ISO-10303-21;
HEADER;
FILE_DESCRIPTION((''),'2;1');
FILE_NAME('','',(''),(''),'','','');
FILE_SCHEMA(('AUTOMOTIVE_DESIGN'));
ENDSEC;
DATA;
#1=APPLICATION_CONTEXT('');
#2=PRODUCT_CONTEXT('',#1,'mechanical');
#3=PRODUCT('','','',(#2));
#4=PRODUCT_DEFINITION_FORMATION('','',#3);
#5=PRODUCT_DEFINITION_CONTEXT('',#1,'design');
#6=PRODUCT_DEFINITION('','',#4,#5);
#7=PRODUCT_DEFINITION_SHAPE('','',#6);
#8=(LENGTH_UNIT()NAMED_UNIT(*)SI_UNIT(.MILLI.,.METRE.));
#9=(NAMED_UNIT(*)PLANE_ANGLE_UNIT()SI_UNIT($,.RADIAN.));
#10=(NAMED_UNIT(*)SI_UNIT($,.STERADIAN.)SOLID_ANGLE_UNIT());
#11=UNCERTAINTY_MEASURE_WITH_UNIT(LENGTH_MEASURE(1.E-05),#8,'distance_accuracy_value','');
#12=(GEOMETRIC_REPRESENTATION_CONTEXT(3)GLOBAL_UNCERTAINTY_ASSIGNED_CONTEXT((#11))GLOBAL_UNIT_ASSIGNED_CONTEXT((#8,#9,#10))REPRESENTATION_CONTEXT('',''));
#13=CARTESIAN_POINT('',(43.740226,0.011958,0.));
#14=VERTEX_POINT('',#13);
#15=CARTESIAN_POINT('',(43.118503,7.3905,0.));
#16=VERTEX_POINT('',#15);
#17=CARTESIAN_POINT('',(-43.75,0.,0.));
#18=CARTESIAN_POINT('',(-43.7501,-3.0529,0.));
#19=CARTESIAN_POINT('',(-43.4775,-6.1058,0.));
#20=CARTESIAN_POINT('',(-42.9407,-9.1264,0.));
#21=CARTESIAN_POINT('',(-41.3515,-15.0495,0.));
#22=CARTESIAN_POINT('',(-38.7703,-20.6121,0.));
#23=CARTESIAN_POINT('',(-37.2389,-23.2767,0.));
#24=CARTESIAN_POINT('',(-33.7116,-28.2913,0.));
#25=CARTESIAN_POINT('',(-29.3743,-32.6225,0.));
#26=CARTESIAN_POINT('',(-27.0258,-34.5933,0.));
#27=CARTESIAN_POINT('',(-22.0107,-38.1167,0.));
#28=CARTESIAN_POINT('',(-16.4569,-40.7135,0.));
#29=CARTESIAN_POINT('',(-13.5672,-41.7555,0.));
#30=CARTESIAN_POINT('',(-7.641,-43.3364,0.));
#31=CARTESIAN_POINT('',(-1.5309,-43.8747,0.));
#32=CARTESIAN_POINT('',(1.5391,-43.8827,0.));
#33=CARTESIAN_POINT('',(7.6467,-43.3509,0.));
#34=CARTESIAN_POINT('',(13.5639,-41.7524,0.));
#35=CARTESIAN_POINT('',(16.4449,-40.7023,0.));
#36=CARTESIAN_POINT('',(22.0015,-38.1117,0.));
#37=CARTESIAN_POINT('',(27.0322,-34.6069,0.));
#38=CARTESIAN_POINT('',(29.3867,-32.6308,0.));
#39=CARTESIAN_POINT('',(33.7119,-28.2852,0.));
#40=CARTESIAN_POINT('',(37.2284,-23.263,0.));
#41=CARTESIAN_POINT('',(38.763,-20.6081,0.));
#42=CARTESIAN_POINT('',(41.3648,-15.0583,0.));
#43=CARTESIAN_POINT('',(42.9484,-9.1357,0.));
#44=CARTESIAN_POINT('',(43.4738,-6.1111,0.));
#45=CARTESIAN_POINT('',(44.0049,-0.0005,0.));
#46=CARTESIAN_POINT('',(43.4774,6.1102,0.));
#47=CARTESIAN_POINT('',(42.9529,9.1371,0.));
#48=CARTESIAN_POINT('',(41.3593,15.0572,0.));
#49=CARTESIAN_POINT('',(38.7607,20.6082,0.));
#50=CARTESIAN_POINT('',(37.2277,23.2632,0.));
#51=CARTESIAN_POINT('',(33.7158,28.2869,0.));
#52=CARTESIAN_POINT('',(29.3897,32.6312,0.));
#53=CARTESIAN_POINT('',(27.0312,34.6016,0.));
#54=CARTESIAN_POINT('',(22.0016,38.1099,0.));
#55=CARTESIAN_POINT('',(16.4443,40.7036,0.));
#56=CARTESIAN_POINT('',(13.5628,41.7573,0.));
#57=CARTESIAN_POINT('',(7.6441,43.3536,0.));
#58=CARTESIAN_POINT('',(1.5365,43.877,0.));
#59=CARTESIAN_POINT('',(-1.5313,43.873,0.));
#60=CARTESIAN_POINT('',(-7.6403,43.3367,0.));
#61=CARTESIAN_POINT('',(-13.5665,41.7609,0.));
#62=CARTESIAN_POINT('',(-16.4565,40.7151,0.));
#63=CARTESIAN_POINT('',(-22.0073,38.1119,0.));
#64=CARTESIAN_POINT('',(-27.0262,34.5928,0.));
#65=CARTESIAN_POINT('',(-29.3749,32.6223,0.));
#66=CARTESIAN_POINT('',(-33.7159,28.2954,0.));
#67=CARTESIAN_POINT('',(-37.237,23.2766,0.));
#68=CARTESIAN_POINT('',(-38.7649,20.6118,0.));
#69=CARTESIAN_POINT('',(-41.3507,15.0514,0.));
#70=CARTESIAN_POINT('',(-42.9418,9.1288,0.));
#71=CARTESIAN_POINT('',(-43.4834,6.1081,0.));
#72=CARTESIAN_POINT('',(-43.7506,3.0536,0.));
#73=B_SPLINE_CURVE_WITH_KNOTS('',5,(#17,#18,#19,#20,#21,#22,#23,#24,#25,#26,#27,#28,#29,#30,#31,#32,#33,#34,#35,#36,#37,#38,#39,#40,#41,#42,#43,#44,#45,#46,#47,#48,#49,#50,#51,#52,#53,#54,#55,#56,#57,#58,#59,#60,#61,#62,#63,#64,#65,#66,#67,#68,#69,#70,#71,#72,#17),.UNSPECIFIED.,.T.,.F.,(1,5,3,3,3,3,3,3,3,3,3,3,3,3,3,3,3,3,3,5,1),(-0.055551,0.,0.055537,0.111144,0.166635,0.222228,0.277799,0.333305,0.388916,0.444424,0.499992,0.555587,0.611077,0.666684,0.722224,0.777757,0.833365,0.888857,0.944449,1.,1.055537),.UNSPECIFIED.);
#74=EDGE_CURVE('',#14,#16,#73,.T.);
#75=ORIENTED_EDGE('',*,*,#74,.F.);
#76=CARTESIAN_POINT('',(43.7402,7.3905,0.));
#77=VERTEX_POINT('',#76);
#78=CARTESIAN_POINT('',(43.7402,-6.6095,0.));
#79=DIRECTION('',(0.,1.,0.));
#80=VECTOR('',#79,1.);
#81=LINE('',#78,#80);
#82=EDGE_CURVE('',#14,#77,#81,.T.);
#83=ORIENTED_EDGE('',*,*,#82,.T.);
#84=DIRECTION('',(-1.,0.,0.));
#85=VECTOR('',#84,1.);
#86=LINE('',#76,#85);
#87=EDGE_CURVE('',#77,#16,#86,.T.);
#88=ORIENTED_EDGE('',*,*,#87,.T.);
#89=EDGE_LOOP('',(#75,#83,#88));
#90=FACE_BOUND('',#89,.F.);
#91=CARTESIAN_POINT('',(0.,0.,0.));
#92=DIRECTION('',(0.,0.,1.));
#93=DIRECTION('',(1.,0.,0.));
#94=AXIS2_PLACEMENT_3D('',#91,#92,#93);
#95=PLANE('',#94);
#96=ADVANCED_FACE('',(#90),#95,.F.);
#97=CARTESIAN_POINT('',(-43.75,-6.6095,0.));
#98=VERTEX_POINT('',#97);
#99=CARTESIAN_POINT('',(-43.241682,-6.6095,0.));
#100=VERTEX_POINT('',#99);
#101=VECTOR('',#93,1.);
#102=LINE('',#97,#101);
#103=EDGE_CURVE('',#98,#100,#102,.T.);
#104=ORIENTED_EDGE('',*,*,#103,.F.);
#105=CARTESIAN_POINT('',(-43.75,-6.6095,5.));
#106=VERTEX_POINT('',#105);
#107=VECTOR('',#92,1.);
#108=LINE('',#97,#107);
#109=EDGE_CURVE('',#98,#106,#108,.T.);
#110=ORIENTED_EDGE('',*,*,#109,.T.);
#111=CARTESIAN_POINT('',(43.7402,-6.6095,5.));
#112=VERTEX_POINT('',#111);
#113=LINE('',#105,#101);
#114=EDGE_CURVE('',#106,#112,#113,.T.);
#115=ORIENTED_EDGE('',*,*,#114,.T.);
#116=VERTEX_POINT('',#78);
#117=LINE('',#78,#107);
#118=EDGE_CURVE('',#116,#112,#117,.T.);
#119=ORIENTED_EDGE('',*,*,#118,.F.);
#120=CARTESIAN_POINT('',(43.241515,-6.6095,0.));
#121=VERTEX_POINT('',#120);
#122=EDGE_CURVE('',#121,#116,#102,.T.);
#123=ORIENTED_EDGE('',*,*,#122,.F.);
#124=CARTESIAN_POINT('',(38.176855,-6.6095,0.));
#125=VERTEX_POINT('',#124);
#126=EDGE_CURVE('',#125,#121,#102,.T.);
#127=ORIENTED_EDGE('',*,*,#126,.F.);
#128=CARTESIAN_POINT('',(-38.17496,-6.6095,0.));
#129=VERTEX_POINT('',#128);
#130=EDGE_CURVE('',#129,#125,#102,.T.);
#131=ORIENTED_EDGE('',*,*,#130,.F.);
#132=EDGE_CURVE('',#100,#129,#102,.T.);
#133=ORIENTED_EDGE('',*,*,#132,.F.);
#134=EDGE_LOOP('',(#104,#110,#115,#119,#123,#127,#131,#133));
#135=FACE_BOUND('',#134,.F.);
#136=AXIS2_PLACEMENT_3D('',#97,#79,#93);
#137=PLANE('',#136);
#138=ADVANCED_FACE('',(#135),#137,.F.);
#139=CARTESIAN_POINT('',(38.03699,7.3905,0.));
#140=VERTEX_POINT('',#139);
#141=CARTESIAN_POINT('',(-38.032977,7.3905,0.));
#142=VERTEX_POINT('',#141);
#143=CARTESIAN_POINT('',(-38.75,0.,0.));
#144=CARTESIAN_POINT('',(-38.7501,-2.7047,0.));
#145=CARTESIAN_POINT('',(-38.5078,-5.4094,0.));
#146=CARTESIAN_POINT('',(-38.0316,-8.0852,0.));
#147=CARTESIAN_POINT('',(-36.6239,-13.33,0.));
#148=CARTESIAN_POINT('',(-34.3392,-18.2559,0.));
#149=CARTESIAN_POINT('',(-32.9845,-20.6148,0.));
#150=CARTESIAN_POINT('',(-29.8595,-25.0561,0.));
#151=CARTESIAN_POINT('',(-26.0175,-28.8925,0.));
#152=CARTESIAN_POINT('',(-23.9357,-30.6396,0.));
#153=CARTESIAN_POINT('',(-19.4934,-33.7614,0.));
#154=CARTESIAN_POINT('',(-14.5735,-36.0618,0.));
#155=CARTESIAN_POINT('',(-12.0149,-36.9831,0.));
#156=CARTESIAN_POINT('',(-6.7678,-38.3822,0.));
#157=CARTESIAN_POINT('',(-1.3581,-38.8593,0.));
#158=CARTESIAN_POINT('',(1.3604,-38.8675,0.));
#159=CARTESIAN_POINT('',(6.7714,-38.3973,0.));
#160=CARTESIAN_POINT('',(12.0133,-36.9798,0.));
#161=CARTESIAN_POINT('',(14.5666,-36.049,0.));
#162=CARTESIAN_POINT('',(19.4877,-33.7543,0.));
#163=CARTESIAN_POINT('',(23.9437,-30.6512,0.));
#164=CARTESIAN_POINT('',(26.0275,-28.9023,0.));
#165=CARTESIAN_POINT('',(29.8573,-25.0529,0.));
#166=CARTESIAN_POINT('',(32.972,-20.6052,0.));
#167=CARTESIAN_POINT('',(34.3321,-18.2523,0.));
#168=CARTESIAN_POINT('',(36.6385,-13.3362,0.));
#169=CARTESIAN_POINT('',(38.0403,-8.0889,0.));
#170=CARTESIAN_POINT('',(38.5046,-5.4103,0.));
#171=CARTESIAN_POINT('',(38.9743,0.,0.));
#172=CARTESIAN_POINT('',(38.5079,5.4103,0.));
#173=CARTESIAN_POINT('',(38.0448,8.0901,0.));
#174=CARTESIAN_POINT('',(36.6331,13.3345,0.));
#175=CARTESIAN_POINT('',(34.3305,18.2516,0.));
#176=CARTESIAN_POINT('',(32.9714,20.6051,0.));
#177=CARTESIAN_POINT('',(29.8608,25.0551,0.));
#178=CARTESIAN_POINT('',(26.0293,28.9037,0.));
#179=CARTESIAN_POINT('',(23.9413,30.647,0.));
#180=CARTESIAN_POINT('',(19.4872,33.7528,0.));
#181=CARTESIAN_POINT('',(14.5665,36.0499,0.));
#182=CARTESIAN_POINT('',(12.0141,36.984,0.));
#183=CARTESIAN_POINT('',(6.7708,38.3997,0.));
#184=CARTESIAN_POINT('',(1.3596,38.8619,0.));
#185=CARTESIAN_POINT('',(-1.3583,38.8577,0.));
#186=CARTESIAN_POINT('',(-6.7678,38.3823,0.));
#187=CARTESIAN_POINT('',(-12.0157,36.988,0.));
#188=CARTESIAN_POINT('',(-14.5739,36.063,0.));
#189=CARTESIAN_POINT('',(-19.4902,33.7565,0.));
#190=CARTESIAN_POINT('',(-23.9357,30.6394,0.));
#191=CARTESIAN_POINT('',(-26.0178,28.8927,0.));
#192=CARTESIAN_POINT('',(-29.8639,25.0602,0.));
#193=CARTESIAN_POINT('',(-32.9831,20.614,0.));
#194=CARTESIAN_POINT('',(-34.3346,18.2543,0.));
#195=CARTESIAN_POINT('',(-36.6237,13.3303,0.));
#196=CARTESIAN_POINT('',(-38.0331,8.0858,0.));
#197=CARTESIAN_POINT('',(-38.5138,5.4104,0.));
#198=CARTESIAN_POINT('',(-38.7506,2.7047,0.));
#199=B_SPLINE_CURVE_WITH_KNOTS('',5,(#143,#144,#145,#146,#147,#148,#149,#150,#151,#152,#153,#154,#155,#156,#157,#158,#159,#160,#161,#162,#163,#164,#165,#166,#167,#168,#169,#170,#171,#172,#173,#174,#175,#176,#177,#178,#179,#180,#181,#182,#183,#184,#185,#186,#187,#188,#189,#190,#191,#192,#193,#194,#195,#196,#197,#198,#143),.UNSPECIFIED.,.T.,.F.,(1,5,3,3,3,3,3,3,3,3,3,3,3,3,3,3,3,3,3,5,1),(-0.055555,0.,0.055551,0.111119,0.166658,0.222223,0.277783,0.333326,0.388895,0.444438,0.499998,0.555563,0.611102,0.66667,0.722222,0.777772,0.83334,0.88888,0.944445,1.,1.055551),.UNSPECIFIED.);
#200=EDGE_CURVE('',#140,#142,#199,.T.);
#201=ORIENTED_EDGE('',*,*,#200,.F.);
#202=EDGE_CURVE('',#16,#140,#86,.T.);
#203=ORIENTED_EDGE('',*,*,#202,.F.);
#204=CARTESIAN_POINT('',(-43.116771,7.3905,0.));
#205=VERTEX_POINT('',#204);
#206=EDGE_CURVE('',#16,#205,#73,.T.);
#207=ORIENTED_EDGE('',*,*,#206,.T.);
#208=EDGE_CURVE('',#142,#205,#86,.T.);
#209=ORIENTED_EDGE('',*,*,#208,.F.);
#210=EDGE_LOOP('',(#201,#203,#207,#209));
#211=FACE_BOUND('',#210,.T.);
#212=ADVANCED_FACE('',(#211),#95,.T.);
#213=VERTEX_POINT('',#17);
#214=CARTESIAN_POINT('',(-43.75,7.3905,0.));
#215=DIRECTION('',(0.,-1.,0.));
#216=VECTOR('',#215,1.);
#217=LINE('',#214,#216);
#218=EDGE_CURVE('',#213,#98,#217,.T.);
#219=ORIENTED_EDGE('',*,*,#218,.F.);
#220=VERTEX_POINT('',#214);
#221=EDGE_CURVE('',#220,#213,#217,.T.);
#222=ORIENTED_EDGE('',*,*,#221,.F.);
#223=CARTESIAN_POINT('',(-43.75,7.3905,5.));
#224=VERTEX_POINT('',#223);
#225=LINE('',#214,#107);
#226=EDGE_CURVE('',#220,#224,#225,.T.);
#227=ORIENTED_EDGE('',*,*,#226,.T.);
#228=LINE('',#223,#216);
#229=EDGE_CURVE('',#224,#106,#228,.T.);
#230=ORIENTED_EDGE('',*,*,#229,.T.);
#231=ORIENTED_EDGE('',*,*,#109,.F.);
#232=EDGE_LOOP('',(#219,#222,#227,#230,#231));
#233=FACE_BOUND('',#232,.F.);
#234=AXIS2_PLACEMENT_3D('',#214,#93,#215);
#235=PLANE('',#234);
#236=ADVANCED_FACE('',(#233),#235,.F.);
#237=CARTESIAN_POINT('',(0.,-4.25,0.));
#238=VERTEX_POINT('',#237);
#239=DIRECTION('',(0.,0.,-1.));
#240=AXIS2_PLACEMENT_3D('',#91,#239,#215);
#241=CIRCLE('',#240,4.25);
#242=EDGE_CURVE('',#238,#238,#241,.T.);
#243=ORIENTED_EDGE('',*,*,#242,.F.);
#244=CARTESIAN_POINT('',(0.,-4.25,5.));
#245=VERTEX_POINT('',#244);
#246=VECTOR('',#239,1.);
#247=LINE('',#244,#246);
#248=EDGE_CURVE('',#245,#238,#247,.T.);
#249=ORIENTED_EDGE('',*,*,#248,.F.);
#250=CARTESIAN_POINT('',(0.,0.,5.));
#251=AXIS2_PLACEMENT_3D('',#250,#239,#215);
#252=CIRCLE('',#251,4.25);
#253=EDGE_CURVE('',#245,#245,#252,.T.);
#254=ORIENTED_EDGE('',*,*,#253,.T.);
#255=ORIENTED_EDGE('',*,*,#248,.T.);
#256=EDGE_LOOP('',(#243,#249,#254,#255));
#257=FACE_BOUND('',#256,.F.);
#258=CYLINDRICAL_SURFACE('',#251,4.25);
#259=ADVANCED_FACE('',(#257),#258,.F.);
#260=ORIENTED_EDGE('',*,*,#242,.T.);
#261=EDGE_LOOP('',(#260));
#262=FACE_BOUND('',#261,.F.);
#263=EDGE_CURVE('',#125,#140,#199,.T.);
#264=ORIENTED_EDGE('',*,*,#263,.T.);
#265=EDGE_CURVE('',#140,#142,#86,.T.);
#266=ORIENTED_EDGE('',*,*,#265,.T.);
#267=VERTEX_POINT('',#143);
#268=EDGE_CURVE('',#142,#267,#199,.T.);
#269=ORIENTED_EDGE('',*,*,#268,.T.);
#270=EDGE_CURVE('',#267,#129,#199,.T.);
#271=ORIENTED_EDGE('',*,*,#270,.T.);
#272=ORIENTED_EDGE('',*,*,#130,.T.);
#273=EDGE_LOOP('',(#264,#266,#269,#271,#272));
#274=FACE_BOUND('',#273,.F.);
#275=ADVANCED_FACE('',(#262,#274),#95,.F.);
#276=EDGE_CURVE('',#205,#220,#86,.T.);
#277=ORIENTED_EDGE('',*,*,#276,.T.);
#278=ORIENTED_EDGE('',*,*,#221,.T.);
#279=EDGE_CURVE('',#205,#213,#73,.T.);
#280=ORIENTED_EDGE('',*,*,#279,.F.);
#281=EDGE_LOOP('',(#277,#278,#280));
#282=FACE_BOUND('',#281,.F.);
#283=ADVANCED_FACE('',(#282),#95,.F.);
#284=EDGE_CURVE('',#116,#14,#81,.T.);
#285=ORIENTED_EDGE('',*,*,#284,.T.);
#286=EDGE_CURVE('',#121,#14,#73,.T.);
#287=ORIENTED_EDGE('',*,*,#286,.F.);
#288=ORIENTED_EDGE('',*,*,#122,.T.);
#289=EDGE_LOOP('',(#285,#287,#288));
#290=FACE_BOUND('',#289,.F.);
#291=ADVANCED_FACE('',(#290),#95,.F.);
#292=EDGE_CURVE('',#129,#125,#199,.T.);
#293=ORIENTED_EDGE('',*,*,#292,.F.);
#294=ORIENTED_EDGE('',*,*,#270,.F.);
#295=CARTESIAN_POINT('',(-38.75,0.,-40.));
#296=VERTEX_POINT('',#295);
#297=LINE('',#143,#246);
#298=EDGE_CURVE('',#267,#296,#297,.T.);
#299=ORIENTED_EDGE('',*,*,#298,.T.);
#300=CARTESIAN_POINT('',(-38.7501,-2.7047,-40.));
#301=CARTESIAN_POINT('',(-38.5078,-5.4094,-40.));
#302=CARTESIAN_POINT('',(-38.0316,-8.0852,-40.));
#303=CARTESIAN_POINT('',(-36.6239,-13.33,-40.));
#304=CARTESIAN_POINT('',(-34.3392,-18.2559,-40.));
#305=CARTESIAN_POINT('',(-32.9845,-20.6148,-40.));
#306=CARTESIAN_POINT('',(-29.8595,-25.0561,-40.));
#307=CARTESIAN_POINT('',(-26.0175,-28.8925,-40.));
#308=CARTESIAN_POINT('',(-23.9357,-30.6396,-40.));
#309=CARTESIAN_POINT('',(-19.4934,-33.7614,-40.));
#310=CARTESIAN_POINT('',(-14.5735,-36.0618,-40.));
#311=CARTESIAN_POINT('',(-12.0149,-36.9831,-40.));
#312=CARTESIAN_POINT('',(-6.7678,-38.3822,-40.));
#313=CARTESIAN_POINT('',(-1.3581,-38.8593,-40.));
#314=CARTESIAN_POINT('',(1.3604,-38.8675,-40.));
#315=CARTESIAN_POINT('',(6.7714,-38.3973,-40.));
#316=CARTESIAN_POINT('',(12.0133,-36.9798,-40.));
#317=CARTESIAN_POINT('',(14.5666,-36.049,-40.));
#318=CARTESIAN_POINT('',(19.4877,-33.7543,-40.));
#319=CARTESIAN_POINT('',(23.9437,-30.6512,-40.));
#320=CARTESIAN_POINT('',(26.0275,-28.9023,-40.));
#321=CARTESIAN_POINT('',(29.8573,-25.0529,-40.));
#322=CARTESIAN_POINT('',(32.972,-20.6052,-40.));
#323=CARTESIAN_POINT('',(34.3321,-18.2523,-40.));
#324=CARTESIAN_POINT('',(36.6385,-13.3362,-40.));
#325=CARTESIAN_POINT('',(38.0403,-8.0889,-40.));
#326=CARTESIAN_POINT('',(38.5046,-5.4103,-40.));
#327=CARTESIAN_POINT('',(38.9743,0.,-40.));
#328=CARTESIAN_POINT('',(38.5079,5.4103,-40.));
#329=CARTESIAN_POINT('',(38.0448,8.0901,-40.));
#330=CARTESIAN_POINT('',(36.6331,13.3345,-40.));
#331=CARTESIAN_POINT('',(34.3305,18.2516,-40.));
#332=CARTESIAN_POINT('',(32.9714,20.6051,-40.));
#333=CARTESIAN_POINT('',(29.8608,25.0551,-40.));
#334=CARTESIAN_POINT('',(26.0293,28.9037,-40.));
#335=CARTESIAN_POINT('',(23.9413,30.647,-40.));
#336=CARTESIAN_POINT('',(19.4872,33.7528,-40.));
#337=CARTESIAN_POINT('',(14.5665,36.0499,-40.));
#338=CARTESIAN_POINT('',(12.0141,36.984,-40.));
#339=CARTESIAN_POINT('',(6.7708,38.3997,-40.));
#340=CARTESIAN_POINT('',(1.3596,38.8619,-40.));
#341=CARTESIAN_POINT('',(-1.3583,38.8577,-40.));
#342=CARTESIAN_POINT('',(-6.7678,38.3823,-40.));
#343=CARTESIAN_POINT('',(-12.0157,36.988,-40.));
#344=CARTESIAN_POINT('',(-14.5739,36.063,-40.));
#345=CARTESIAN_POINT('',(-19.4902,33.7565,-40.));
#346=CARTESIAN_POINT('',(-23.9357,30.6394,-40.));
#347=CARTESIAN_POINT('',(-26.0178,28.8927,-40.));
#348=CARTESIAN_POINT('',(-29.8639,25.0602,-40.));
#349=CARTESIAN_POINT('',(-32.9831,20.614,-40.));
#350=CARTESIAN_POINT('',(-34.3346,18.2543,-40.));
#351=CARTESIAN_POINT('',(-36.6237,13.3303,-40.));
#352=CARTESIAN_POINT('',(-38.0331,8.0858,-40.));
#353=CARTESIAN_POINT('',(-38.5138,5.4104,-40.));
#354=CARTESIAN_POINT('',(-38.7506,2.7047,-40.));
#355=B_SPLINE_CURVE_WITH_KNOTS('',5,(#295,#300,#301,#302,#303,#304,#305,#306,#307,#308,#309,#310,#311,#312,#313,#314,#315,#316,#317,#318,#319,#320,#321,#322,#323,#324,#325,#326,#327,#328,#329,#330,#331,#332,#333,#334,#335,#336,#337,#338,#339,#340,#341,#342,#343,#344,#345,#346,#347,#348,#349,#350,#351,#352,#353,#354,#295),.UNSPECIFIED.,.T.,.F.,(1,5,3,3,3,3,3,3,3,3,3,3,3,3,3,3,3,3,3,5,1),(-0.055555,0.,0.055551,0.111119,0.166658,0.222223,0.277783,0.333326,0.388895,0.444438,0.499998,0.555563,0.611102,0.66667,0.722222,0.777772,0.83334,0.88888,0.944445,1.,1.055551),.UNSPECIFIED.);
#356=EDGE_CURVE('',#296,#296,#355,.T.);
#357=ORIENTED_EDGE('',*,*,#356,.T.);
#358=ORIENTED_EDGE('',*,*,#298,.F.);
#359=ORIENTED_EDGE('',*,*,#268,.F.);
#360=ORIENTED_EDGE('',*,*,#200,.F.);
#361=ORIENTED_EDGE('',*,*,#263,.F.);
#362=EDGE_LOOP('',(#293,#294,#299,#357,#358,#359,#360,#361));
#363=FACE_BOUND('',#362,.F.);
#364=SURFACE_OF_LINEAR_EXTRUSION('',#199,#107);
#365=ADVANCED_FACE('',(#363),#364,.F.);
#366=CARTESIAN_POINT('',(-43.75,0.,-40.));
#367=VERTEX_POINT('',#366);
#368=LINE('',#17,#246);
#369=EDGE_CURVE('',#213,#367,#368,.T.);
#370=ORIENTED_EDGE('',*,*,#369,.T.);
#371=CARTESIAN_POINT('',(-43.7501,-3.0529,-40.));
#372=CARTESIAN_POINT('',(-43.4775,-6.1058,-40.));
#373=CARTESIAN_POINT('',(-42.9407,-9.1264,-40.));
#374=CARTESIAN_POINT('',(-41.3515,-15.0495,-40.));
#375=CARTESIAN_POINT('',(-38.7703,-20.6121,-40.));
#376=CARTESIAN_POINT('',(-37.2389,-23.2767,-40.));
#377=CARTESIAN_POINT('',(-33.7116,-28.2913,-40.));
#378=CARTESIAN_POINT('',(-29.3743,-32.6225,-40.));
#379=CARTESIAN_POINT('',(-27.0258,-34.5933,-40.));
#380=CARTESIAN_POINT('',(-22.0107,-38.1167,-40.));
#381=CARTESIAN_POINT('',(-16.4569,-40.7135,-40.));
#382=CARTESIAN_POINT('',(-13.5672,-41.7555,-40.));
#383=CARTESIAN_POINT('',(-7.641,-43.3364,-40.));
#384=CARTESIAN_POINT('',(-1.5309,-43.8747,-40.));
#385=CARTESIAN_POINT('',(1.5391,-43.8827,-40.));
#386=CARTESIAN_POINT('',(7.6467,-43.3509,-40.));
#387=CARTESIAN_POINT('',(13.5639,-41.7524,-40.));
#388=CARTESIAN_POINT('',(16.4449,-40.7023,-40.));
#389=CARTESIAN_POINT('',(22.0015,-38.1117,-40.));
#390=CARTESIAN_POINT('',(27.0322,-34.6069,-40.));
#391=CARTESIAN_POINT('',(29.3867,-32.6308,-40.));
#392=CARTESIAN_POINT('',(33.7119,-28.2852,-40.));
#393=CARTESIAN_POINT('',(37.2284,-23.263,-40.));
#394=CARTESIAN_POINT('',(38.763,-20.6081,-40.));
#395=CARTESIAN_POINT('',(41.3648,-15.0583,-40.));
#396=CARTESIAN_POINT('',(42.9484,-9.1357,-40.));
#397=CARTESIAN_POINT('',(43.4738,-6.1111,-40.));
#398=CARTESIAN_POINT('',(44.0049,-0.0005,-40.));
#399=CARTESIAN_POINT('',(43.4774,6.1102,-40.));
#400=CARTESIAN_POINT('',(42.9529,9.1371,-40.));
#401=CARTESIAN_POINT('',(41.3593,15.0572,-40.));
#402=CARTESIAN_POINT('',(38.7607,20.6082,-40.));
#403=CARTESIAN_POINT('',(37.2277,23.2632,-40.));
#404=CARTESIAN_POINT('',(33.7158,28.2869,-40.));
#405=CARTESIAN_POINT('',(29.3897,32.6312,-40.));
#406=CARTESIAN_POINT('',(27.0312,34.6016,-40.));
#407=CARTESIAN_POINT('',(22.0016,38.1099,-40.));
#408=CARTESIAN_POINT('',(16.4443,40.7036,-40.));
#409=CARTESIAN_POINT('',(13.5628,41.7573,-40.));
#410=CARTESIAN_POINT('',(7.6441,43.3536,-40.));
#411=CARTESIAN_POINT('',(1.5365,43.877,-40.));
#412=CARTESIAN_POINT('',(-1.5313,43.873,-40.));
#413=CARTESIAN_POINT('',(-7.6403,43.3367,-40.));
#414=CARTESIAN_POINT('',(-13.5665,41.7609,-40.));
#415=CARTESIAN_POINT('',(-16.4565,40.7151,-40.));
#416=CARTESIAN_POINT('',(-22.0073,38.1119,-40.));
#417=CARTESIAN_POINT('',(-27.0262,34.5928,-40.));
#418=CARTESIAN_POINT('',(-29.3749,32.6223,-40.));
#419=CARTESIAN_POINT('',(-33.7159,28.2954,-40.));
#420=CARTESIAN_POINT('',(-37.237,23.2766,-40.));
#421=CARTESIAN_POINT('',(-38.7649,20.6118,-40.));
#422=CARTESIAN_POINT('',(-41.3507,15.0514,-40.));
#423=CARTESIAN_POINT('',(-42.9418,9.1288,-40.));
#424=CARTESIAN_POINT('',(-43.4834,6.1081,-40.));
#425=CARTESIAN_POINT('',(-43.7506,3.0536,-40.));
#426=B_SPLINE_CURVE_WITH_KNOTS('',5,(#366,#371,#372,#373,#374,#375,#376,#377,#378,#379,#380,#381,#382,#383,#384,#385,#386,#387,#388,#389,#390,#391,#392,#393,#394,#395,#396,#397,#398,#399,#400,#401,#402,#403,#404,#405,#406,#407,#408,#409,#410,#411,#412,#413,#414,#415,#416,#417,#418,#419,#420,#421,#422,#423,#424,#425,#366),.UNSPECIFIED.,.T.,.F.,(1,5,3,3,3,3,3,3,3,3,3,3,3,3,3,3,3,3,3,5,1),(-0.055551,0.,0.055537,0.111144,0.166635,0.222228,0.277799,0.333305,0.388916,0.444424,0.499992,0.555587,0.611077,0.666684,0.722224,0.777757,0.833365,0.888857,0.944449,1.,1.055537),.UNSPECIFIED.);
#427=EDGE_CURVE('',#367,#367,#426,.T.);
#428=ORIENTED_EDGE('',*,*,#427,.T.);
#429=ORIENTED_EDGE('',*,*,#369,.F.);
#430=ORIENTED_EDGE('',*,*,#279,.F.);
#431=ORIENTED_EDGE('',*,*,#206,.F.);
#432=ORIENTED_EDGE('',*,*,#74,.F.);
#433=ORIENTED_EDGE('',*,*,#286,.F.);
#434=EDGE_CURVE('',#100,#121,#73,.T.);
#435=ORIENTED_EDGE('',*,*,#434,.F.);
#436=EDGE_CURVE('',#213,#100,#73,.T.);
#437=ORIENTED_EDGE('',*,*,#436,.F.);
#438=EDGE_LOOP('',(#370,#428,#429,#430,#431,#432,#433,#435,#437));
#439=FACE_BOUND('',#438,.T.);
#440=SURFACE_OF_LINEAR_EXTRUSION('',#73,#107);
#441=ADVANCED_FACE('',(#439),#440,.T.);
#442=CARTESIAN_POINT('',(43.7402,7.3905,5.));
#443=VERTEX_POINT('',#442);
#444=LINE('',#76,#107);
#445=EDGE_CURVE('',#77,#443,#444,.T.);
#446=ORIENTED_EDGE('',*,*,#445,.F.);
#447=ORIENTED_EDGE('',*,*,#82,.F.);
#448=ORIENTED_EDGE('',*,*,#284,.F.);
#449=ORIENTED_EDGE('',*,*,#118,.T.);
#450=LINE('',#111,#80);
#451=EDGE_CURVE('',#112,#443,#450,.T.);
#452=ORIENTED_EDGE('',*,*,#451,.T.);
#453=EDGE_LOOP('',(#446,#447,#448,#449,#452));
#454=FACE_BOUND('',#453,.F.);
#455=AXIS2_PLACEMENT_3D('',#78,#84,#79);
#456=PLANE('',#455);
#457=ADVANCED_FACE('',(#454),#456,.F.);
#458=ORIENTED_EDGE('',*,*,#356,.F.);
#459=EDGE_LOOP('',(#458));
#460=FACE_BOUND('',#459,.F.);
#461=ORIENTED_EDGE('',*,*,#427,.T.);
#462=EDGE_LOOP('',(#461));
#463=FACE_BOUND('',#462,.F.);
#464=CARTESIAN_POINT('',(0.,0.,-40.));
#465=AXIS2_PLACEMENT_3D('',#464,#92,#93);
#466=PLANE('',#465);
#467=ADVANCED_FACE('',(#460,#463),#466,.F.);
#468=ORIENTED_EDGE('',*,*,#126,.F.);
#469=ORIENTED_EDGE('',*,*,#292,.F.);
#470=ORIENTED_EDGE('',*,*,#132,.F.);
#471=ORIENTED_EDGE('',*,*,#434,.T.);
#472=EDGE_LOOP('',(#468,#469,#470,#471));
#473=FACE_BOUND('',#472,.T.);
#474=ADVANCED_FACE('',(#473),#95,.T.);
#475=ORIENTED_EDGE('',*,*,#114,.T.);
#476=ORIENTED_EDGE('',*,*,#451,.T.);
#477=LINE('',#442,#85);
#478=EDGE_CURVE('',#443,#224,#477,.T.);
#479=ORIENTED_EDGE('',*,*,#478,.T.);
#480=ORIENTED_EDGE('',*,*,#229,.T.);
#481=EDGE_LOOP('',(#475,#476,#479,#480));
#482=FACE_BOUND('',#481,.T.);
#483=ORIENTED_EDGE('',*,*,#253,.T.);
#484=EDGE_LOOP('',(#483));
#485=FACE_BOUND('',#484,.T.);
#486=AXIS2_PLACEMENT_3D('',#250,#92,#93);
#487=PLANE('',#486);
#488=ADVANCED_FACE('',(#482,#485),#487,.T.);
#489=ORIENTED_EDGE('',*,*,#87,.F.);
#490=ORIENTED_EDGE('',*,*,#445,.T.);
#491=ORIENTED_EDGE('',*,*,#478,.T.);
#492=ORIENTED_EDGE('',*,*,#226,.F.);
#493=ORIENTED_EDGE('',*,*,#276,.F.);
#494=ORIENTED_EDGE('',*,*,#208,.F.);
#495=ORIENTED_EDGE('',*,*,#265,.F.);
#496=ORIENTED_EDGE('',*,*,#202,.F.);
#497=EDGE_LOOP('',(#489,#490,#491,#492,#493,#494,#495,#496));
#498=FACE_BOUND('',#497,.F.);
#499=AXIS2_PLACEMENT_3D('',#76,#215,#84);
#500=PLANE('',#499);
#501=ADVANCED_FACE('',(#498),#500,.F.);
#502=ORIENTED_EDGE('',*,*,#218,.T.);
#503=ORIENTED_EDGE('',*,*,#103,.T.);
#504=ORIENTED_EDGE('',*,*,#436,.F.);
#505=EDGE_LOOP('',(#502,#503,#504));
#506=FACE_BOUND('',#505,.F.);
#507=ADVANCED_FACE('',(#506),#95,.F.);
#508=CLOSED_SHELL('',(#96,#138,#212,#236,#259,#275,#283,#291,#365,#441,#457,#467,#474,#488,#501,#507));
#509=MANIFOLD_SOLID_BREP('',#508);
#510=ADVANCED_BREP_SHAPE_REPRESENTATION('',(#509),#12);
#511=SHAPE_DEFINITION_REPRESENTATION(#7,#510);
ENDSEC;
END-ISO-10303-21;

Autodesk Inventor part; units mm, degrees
ref_plane "YZ Plane" through (0, 0, 0) normal (1, 0, 0) x (0, 1, 0)
ref_plane "XZ Plane" through (0, 0, 0) normal (0, 1, 0) x (-1, 0, 0)
ref_plane "XY Plane" through (0, 0, 0) normal (0, 0, 1) x (1, 0, 0)
sketch "Sketch1" plane through (0, 0, 0) normal (0, 0, 1) x (1, 0, 0)
  spline S0 degree 3 poles (-37.25, 0) (-37.25, -7.0376) (-35.2039, -14.0633) (-31.4252, -20.0004) (-27.6466, -25.9375) (-22.1482, -30.766) (-15.7726, -33.7459) (-9.397, -36.7258) (-2.1659, -37.8471) (4.8127, -36.9378) (11.7914, -36.0285) (18.4938, -33.0918) (23.893, -28.5778) (29.2921, -24.0637) (33.3697, -17.9875) (35.5009, -11.2804) (37.6321, -4.5732) (37.8097, 2.7422) (36.0064, 9.5448) (34.2031, 16.3475) (30.4251, 22.6143) (25.2512, 27.385) (20.0774, 32.1557) (13.5254, 35.414) (6.5991, 36.6608) (-0.3272, 37.9076) (-7.6042, 37.1385) (-14.1169, 34.4714) (-20.6295, 31.8043) (-26.3557, 27.2483) (-30.4179, 21.5014) (-34.4802, 15.7546) (-36.8647, 8.8365) (-37.2061, 1.8072) (-37.2354, 1.2052) (-37.25, 0.6026) (-37.25, 0) knots 0 0 0 0 0.566787 0.566787 0.566787 1.133573 1.133573 1.133573 1.70036 1.70036 1.70036 2.267146 2.267146 2.267146 2.833933 2.833933 2.833933 3.400719 3.400719 3.400719 3.967506 3.967506 3.967506 4.534292 4.534292 4.534292 5.101079 5.101079 5.101079 5.667865 5.667865 5.667865 6.234652 6.234652 6.234652 6.283185 6.283185 6.283185 6.283185 projected
  spline S1 degree 5 poles (-38.75, 0) (-38.7501, -2.7047) (-38.5078, -5.4094) (-38.0316, -8.0852) (-36.6239, -13.33) (-34.3392, -18.2559) (-32.9845, -20.6148) (-29.8595, -25.0561) (-26.0175, -28.8925) (-23.9357, -30.6396) (-19.4934, -33.7614) (-14.5735, -36.0618) (-12.0149, -36.9831) (-6.7678, -38.3822) (-1.3581, -38.8593) (1.3604, -38.8675) (6.7714, -38.3973) (12.0133, -36.9798) (14.5666, -36.049) (19.4877, -33.7543) (23.9437, -30.6512) (26.0275, -28.9023) (29.8573, -25.0529) (32.972, -20.6052) (34.3321, -18.2523) (36.6385, -13.3362) (38.0403, -8.0889) (38.5046, -5.4103) (38.9743, 0) (38.5079, 5.4103) (38.0448, 8.0901) (36.6331, 13.3345) (34.3305, 18.2516) (32.9714, 20.6051) (29.8608, 25.0551) (26.0293, 28.9037) (23.9413, 30.647) (19.4872, 33.7528) (14.5665, 36.0499) (12.0141, 36.984) (6.7708, 38.3997) (1.3596, 38.8619) (-1.3583, 38.8577) (-6.7678, 38.3823) (-12.0157, 36.988) (-14.5739, 36.063) (-19.4902, 33.7565) (-23.9357, 30.6394) (-26.0178, 28.8927) (-29.8639, 25.0602) (-32.9831, 20.614) (-34.3346, 18.2543) (-36.6237, 13.3303) (-38.0331, 8.0858) (-38.5138, 5.4104) (-38.7506, 2.7047) (-38.75, 0) knots 0 0 0 0 0 0 0.055551 0.055551 0.055551 0.111119 0.111119 0.111119 0.166658 0.166658 0.166658 0.222223 0.222223 0.222223 0.277783 0.277783 0.277783 0.333326 0.333326 0.333326 0.388895 0.388895 0.388895 0.444438 0.444438 0.444438 0.499998 0.499998 0.499998 0.555563 0.555563 0.555563 0.611102 0.611102 0.611102 0.66667 0.66667 0.66667 0.722222 0.722222 0.722222 0.777772 0.777772 0.777772 0.83334 0.83334 0.83334 0.88888 0.88888 0.88888 0.944445 0.944445 0.944445 1 1 1 1 1 1
  spline S2 degree 5 poles (-43.75, 0) (-43.7501, -3.0529) (-43.4775, -6.1058) (-42.9407, -9.1264) (-41.3515, -15.0495) (-38.7703, -20.6121) (-37.2389, -23.2767) (-33.7116, -28.2913) (-29.3743, -32.6225) (-27.0258, -34.5933) (-22.0107, -38.1167) (-16.4569, -40.7135) (-13.5672, -41.7555) (-7.641, -43.3364) (-1.5309, -43.8747) (1.5391, -43.8827) (7.6467, -43.3509) (13.5639, -41.7524) (16.4449, -40.7023) (22.0015, -38.1117) (27.0322, -34.6069) (29.3867, -32.6308) (33.7119, -28.2852) (37.2284, -23.263) (38.763, -20.6081) (41.3648, -15.0583) (42.9484, -9.1357) (43.4738, -6.1111) (44.0049, -0.0005) (43.4774, 6.1102) (42.9529, 9.1371) (41.3593, 15.0572) (38.7607, 20.6082) (37.2277, 23.2632) (33.7158, 28.2869) (29.3897, 32.6312) (27.0312, 34.6016) (22.0016, 38.1099) (16.4443, 40.7036) (13.5628, 41.7573) (7.6441, 43.3536) (1.5365, 43.877) (-1.5313, 43.873) (-7.6403, 43.3367) (-13.5665, 41.7609) (-16.4565, 40.7151) (-22.0073, 38.1119) (-27.0262, 34.5928) (-29.3749, 32.6223) (-33.7159, 28.2954) (-37.237, 23.2766) (-38.7649, 20.6118) (-41.3507, 15.0514) (-42.9418, 9.1288) (-43.4834, 6.1081) (-43.7506, 3.0536) (-43.75, 0) knots 0 0 0 0 0 0 0.055537 0.055537 0.055537 0.111144 0.111144 0.111144 0.166635 0.166635 0.166635 0.222228 0.222228 0.222228 0.277799 0.277799 0.277799 0.333305 0.333305 0.333305 0.388916 0.388916 0.388916 0.444424 0.444424 0.444424 0.499992 0.499992 0.499992 0.555587 0.555587 0.555587 0.611077 0.611077 0.611077 0.666684 0.666684 0.666684 0.722224 0.722224 0.722224 0.777757 0.777757 0.777757 0.833365 0.833365 0.833365 0.888857 0.888857 0.888857 0.944449 0.944449 0.944449 1 1 1 1 1 1
  point P0 (0, 0)
  point P1 (-37.25, 0)
  dimension "d0" = 1.5
  dimension "d1" = 6.5
extrude "Extrusion1" add sketch "Sketch1" against normal blind 40 contours S2
sketch "Sketch5" plane through (0, 0, 0) normal (0, 0, 1) x (1, 0, 0)
  line L0 (-43.75, -6.6095) -> (43.7402, -6.6095)
  line L1 (43.7402, -6.6095) -> (43.7402, 7.3905)
  line L2 (43.7402, 7.3905) -> (-43.75, 7.3905)
  line L3 (-43.75, 7.3905) -> (-43.75, -6.6095)
  line L4 (-43.75, -6.6095) -> (43.7402, 7.3905) construction
  line L5 (43.7402, -6.6095) -> (-43.75, 7.3905) construction
  point P0 (-38.75, 0)
  point P1 (-0.0049, 0.3905)
  dimension "d27" = 14
extrude "Extrusion5" add sketch "Sketch5" along normal blind 5
sketch "Sketch6" plane through (0, 0, 5) normal (0, 0, 1) x (1, 0, 0)
  point P0 (0, 0)
  point P1 (0, 0)
hole "Hole1" at (0, 0, 5) direction (0, 0, -1) diameter 8.5 end through all
properties part number "tunnel"
